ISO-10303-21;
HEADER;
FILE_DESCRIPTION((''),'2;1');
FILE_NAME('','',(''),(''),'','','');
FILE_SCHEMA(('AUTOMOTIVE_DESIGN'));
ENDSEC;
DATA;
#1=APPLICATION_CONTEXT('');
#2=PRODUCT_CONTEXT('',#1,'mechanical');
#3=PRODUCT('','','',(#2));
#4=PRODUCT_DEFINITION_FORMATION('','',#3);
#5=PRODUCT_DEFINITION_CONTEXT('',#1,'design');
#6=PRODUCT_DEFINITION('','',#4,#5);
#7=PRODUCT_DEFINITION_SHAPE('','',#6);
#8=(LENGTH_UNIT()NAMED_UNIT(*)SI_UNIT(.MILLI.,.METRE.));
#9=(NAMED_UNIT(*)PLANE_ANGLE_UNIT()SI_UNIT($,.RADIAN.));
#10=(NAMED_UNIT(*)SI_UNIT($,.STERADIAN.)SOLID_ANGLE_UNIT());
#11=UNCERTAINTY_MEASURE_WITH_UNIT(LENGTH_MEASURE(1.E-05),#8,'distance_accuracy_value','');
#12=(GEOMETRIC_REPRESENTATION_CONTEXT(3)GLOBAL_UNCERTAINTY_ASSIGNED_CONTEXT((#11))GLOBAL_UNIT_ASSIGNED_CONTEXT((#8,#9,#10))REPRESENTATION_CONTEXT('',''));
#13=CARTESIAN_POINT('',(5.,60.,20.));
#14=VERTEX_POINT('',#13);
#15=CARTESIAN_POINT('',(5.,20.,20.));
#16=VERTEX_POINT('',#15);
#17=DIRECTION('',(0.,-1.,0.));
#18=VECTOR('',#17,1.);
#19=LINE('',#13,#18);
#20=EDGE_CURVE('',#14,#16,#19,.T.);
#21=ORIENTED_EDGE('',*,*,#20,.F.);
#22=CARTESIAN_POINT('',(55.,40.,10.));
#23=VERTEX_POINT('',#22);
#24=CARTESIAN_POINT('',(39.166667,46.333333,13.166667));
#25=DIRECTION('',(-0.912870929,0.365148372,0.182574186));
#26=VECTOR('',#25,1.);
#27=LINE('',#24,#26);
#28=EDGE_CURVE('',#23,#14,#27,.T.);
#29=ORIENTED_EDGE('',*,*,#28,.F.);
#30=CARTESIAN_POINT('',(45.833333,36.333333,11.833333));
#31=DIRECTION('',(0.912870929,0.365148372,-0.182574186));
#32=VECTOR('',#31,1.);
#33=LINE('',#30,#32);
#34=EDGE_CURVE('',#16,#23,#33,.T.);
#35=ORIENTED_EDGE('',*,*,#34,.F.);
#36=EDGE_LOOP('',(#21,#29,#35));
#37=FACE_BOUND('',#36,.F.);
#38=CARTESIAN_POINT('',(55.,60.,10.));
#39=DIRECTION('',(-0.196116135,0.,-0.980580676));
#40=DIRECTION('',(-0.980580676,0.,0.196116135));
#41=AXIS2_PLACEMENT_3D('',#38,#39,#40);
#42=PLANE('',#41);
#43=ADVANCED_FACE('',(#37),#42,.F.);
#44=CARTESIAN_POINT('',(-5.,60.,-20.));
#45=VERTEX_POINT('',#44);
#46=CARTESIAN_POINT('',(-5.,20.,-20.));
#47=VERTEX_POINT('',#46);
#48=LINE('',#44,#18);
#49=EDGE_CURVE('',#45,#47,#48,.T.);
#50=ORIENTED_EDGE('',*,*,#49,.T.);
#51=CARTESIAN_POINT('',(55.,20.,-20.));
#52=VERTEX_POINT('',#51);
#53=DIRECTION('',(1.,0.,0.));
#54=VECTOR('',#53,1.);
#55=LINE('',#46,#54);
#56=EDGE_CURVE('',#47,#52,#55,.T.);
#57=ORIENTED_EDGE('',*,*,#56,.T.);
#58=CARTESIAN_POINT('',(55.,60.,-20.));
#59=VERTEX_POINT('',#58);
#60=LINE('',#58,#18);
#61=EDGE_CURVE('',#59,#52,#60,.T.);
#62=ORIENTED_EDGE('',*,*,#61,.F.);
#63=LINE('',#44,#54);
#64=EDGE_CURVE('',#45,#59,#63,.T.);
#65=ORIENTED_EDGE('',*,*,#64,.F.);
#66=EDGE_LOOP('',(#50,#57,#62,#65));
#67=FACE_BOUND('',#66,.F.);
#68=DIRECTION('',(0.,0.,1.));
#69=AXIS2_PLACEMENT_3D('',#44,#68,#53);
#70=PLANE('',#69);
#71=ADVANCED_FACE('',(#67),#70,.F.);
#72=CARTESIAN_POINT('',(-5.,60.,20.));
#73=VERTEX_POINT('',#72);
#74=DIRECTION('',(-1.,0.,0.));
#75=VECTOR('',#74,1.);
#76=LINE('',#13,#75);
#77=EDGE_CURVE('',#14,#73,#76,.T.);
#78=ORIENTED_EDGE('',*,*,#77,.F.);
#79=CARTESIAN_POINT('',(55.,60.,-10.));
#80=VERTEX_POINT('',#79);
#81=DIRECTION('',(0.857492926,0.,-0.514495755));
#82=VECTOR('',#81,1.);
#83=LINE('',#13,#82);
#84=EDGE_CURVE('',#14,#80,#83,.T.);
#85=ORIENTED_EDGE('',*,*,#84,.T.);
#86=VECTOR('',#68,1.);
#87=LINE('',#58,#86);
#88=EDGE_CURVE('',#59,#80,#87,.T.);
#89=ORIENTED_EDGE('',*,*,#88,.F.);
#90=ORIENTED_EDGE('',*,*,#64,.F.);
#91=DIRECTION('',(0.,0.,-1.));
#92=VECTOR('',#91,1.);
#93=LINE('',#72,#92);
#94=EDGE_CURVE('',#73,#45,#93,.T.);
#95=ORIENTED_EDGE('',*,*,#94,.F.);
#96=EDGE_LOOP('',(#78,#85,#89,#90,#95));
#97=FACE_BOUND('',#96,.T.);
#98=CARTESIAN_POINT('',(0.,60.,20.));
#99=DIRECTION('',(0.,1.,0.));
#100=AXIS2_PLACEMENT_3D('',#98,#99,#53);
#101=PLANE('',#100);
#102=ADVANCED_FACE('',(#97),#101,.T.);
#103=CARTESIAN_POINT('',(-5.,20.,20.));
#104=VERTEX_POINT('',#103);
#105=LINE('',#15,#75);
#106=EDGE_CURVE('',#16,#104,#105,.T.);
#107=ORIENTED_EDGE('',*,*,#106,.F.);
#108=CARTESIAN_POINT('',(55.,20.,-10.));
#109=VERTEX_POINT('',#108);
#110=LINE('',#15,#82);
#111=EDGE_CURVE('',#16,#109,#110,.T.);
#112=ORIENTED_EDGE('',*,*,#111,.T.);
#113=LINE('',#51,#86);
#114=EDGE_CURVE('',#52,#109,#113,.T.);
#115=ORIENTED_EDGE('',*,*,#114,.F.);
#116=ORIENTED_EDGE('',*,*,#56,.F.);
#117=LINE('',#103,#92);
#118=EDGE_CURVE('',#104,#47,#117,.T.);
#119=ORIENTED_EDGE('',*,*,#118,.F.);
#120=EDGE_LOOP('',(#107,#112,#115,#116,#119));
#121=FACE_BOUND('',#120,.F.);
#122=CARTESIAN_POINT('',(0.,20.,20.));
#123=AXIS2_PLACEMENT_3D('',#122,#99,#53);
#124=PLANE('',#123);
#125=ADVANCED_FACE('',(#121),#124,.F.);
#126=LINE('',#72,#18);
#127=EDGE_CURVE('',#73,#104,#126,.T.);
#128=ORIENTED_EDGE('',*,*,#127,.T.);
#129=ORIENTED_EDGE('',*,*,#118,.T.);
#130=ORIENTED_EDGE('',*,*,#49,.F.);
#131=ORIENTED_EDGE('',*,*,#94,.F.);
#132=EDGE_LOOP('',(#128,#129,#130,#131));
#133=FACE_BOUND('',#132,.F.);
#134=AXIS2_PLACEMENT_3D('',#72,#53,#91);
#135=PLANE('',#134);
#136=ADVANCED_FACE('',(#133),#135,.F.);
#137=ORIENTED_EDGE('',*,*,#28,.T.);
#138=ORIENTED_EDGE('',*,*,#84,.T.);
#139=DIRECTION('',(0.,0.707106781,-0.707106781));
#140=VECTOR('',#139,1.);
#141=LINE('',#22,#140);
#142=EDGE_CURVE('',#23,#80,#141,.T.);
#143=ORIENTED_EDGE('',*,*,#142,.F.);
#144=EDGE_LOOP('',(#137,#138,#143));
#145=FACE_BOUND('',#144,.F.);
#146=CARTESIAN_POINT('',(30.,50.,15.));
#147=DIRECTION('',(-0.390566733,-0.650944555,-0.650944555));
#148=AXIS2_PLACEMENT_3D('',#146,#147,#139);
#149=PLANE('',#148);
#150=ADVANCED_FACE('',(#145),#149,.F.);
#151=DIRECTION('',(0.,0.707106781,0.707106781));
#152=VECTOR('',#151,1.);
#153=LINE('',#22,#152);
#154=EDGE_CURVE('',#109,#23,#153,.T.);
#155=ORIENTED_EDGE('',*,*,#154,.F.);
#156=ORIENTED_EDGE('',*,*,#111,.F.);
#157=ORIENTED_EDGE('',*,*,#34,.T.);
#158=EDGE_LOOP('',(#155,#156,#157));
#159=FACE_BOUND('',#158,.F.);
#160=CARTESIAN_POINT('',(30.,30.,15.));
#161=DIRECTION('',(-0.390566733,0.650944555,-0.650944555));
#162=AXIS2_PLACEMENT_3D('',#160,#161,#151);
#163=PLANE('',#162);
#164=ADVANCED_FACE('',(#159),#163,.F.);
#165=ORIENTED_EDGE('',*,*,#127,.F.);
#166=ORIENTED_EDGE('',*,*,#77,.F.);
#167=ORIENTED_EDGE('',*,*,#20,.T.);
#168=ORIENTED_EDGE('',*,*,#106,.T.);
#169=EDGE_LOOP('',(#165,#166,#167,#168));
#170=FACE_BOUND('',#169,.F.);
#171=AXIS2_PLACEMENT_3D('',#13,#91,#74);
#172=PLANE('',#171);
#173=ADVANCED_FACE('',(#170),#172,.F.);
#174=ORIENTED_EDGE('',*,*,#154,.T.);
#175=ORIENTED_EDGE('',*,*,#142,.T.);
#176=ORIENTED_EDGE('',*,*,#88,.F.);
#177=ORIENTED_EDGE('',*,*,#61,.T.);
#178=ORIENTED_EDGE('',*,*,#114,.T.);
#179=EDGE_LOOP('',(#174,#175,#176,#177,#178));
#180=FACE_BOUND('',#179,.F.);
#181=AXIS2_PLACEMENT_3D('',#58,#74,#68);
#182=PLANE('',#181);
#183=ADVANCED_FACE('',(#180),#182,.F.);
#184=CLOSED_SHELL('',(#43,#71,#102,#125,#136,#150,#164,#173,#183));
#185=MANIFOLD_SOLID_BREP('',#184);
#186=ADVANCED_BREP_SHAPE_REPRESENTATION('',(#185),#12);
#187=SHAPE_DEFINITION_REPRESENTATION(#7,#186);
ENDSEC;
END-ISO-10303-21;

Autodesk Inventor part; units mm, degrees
ref_plane "YZ Plane" through (0, 0, 0) normal (1, 0, 0) x (0, 1, 0)
ref_plane "XZ Plane" through (0, 0, 0) normal (0, 1, 0) x (-1, 0, 0)
ref_plane "XY Plane" through (0, 0, 0) normal (0, 0, 1) x (1, 0, 0)
sketch "Sketch1" plane through (0, 0, 0) normal (0, 0, 1) x (1, 0, 0)
  line L0 (-5, 40) -> (55, 40)
  line L1 (55, 40) -> (55, 10)
  line L2 (5, 0) -> (-5, 0)
  line L3 (-5, 0) -> (-5, 40)
  line L4 (55, 10) -> (5, 0)
  point P0 (0, 0)
  point P1 (55, 0)
  point P2 (0, 0)
  dimension "d0" = 40
  dimension "d1" = 60
  dimension "d2" = 10
  dimension "d3" = 50
extrude "Extrusion1" add sketch "Sketch1" against normal blind 40
sketch "Sketch2" plane through (55, 10, 0) normal (1, 0, 0) x (0, 0, -1)
  line L0 (0, 0) -> (0, 30) projected
  line L1 (0, 0) -> (40, 0) projected
  line L2 (40, 30) -> (40, 0) projected
  line L3 (20, 0) -> (0, 20)
  line L4 (20, 0) -> (40, 20)
  point P0 (0, -10)
  dimension "d6" = 20
sketch "Sketch3" plane through (0, 0, 0) normal (0, 0, 1) x (1, 0, 0)
  line L0 (5, 0) -> (55, 30)
  line L1 (55, 10) -> (55, 30) projected
  point P0 (0, 0)
sweep "Sweep1" cut profiles "Sketch2" path "Sketch3" path curves L0
move or copy body "Rotate1" bodies to move or copy 1 copy no rotation origin (0, 0, 0) rotation axis (1, 0, 0) rotation angle -90 translate (0, 60, 20)
properties part number "B6"
